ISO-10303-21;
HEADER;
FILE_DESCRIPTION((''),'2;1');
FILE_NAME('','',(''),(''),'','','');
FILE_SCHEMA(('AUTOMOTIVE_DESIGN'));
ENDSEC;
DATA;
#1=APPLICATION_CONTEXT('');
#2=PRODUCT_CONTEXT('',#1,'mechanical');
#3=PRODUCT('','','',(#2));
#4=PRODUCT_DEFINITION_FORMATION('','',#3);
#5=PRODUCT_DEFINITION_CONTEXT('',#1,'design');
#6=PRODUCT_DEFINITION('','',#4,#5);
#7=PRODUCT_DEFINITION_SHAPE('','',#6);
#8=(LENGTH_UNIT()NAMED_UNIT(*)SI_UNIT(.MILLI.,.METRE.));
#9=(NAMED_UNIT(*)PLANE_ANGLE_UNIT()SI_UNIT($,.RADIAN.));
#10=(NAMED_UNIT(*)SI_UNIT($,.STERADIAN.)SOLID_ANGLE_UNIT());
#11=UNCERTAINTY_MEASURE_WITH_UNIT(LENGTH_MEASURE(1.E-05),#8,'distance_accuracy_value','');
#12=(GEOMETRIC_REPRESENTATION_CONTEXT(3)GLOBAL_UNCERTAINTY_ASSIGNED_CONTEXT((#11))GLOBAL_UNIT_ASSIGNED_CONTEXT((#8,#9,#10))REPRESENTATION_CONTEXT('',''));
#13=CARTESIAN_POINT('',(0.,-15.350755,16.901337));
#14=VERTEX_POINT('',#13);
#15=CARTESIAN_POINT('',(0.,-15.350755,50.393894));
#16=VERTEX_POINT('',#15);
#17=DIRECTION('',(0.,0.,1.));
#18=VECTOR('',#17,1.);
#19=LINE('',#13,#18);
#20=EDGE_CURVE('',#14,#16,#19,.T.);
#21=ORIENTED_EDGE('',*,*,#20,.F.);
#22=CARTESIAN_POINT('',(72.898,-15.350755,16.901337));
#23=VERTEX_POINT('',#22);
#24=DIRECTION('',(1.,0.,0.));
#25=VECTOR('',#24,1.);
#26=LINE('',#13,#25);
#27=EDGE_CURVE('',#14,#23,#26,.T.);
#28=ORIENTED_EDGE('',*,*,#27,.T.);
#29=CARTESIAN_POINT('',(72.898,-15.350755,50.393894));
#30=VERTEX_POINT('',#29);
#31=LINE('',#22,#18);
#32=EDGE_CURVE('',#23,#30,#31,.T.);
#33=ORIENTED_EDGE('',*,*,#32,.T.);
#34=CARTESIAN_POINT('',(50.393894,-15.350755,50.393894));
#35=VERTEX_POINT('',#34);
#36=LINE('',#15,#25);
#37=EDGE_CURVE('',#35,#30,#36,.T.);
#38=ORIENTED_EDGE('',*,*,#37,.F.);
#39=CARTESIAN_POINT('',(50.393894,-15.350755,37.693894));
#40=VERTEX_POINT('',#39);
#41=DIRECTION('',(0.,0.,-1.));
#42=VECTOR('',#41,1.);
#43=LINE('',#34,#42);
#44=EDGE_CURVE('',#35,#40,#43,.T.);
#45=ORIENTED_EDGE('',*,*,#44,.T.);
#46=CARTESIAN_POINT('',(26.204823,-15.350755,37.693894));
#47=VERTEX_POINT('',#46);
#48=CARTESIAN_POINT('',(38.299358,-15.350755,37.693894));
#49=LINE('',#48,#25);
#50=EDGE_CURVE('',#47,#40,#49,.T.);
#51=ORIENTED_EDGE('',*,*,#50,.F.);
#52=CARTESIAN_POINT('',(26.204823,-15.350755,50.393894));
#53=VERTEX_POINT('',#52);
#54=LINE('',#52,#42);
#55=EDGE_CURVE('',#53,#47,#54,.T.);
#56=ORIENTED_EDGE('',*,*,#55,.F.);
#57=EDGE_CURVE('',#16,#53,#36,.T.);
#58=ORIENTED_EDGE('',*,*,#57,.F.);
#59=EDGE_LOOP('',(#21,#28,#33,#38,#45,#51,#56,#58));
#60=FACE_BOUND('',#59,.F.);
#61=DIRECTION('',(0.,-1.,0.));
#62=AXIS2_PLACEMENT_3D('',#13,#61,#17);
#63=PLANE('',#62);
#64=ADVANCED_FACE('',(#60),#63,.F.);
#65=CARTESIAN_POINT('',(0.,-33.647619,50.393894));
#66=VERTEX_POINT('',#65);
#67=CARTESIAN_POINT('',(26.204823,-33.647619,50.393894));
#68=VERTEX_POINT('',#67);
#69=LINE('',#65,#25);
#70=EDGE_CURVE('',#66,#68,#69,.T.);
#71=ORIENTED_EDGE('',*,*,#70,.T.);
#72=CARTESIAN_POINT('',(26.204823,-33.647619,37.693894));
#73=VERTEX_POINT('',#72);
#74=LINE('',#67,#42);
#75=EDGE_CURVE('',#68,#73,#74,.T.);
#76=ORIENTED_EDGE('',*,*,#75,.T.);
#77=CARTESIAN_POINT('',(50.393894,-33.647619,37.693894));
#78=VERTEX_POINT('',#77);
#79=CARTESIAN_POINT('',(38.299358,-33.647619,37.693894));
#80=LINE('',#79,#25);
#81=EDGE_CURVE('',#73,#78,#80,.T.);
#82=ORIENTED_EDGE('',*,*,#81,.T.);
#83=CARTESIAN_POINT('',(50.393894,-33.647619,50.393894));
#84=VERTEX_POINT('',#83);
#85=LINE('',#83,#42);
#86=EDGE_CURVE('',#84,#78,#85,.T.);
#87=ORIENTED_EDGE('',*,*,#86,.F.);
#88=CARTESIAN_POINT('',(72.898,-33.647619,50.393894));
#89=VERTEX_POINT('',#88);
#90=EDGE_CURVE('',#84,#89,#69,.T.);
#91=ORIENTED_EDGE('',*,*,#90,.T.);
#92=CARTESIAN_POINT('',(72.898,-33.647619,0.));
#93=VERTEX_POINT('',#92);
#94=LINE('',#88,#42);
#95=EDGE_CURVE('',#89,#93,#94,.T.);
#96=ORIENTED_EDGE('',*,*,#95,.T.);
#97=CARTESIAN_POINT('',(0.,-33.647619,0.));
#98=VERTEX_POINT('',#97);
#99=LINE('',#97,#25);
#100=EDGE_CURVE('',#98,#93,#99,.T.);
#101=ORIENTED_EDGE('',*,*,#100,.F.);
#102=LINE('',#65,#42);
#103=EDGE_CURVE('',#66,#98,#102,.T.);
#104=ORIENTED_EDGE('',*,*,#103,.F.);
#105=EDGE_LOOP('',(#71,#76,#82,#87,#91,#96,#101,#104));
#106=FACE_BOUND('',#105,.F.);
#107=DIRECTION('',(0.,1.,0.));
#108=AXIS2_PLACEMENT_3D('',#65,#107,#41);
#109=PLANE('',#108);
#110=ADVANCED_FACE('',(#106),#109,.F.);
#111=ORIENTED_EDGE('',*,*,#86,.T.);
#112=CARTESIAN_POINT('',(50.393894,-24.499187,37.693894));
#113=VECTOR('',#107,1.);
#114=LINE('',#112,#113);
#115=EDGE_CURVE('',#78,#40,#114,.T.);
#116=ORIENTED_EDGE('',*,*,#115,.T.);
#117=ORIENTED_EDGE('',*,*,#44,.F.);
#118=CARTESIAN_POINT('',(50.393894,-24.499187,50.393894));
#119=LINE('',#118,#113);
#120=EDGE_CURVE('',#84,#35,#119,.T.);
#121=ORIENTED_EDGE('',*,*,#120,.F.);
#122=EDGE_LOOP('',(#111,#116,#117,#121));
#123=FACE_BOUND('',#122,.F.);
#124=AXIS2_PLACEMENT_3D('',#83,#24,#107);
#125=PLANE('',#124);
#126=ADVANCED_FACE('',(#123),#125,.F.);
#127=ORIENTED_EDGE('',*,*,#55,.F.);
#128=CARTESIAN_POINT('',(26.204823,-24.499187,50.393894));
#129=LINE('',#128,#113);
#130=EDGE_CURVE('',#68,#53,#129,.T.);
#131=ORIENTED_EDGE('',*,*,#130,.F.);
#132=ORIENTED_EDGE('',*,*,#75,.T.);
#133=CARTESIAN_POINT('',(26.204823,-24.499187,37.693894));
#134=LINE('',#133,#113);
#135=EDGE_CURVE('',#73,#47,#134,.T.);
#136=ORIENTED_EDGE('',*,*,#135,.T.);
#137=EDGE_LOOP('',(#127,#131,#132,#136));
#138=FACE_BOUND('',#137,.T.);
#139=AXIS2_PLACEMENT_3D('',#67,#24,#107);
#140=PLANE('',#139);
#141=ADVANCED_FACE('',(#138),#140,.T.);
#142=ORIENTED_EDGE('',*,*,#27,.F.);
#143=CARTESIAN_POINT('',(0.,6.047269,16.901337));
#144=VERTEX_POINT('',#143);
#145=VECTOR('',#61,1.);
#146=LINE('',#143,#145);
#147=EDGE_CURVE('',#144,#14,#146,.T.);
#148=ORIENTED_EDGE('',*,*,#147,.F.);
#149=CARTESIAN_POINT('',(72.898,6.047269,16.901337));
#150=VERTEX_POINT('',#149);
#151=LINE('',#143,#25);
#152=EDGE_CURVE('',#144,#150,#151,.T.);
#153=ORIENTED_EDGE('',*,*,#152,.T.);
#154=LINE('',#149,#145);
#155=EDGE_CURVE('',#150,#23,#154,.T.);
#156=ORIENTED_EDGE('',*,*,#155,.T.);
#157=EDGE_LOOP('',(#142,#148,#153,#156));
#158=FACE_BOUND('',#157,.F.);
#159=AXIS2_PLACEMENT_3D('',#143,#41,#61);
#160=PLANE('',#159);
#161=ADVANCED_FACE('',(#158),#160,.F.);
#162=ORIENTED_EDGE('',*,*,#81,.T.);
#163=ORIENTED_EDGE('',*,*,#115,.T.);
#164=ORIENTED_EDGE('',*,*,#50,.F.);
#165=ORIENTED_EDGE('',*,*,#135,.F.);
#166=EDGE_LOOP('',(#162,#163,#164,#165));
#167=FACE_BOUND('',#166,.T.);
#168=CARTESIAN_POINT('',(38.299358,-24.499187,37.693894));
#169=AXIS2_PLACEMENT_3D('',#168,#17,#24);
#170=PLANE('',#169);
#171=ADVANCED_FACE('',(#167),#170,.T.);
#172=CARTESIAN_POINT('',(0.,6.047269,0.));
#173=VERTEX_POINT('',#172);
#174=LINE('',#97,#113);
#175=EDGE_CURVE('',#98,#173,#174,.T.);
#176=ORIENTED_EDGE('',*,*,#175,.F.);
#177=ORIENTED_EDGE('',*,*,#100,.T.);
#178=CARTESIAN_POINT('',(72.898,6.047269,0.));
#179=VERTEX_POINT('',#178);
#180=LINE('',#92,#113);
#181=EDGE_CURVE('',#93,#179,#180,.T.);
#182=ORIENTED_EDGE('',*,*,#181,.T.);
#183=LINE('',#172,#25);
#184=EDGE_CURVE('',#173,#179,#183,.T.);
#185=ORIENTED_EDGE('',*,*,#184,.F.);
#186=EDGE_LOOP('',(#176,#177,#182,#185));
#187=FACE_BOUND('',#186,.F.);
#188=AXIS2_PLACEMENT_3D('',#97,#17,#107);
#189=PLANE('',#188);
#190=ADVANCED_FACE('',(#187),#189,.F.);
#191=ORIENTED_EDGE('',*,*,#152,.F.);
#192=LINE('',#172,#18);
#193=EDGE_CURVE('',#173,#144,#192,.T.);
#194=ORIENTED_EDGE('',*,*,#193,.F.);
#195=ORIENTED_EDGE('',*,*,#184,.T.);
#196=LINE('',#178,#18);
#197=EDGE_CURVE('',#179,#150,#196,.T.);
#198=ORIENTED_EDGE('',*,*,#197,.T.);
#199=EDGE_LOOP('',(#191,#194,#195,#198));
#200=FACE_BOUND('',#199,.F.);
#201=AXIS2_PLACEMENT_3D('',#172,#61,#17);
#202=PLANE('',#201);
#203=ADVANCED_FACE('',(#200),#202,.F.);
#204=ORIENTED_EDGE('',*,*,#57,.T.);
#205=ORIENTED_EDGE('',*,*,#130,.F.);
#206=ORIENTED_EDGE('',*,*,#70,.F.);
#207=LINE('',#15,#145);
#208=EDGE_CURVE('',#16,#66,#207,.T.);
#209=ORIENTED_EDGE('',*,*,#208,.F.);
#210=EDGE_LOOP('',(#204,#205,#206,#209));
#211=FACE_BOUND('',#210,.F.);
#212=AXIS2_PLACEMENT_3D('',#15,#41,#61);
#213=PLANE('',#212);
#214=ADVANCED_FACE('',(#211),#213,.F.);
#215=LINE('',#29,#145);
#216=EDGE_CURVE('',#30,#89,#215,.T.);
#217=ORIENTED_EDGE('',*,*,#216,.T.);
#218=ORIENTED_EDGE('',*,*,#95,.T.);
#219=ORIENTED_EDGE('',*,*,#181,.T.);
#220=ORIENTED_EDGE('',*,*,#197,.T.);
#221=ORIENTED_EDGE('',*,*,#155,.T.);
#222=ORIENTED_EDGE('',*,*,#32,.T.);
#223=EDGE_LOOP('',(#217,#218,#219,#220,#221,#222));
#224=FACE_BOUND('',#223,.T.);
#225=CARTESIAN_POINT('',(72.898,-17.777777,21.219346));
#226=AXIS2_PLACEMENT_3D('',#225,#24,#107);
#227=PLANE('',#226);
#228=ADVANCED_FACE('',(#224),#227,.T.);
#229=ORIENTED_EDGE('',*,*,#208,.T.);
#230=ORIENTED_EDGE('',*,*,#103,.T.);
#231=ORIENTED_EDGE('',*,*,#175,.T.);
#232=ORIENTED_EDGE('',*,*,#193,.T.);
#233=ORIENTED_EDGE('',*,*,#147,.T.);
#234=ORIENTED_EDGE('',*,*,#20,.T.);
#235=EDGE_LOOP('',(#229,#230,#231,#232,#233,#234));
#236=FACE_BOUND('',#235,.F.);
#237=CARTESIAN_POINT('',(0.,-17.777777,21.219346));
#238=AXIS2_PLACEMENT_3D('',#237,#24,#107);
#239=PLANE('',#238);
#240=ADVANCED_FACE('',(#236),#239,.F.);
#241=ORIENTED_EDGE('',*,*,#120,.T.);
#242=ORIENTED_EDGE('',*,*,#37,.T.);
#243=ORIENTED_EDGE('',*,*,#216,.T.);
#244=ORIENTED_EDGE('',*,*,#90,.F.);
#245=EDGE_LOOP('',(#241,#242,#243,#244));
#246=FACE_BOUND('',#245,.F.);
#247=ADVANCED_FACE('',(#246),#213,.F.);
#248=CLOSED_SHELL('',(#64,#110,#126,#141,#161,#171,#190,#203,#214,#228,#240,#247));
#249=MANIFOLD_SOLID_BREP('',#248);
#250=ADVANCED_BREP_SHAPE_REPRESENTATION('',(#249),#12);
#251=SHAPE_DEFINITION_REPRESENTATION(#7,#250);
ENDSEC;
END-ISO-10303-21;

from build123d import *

# Parameters (mm, degrees)
F1_DEPTH = 72.898
F2_W     = 24.1890717298
F2_H     = 18.2968638837
F3_DEPTH = 12.7


# Not quite as in the source:
# - a length typed as a fraction of an inch, garbled in the dataset ("3 / 203.2 mm" for 3/8 in), is restored


with BuildPart() as f1:
    # F0 (on Right) → F1 (new body)
    with BuildSketch(Plane.YZ):
        Polygon((-3.8764555939, 0), (0, 0), (6.0472693294, 0), (6.0472693294, 16.9013366103), (-15.3507553041, 16.9013366103), (-15.3507553041, 50.3938943148), (-33.6476191878, 50.3938943148), (-33.6476191878, 0), align=None)
    extrude(amount=F1_DEPTH)

    # F2 (on face) → F3 (cut)
    with BuildSketch(Plane.XY.offset(50.3938943148)):
        with Locations((38.2993584499, -24.499187246)):
            Rectangle(F2_W, F2_H)
    extrude(amount=-F3_DEPTH, mode=Mode.SUBTRACT)


solid = f1.part
